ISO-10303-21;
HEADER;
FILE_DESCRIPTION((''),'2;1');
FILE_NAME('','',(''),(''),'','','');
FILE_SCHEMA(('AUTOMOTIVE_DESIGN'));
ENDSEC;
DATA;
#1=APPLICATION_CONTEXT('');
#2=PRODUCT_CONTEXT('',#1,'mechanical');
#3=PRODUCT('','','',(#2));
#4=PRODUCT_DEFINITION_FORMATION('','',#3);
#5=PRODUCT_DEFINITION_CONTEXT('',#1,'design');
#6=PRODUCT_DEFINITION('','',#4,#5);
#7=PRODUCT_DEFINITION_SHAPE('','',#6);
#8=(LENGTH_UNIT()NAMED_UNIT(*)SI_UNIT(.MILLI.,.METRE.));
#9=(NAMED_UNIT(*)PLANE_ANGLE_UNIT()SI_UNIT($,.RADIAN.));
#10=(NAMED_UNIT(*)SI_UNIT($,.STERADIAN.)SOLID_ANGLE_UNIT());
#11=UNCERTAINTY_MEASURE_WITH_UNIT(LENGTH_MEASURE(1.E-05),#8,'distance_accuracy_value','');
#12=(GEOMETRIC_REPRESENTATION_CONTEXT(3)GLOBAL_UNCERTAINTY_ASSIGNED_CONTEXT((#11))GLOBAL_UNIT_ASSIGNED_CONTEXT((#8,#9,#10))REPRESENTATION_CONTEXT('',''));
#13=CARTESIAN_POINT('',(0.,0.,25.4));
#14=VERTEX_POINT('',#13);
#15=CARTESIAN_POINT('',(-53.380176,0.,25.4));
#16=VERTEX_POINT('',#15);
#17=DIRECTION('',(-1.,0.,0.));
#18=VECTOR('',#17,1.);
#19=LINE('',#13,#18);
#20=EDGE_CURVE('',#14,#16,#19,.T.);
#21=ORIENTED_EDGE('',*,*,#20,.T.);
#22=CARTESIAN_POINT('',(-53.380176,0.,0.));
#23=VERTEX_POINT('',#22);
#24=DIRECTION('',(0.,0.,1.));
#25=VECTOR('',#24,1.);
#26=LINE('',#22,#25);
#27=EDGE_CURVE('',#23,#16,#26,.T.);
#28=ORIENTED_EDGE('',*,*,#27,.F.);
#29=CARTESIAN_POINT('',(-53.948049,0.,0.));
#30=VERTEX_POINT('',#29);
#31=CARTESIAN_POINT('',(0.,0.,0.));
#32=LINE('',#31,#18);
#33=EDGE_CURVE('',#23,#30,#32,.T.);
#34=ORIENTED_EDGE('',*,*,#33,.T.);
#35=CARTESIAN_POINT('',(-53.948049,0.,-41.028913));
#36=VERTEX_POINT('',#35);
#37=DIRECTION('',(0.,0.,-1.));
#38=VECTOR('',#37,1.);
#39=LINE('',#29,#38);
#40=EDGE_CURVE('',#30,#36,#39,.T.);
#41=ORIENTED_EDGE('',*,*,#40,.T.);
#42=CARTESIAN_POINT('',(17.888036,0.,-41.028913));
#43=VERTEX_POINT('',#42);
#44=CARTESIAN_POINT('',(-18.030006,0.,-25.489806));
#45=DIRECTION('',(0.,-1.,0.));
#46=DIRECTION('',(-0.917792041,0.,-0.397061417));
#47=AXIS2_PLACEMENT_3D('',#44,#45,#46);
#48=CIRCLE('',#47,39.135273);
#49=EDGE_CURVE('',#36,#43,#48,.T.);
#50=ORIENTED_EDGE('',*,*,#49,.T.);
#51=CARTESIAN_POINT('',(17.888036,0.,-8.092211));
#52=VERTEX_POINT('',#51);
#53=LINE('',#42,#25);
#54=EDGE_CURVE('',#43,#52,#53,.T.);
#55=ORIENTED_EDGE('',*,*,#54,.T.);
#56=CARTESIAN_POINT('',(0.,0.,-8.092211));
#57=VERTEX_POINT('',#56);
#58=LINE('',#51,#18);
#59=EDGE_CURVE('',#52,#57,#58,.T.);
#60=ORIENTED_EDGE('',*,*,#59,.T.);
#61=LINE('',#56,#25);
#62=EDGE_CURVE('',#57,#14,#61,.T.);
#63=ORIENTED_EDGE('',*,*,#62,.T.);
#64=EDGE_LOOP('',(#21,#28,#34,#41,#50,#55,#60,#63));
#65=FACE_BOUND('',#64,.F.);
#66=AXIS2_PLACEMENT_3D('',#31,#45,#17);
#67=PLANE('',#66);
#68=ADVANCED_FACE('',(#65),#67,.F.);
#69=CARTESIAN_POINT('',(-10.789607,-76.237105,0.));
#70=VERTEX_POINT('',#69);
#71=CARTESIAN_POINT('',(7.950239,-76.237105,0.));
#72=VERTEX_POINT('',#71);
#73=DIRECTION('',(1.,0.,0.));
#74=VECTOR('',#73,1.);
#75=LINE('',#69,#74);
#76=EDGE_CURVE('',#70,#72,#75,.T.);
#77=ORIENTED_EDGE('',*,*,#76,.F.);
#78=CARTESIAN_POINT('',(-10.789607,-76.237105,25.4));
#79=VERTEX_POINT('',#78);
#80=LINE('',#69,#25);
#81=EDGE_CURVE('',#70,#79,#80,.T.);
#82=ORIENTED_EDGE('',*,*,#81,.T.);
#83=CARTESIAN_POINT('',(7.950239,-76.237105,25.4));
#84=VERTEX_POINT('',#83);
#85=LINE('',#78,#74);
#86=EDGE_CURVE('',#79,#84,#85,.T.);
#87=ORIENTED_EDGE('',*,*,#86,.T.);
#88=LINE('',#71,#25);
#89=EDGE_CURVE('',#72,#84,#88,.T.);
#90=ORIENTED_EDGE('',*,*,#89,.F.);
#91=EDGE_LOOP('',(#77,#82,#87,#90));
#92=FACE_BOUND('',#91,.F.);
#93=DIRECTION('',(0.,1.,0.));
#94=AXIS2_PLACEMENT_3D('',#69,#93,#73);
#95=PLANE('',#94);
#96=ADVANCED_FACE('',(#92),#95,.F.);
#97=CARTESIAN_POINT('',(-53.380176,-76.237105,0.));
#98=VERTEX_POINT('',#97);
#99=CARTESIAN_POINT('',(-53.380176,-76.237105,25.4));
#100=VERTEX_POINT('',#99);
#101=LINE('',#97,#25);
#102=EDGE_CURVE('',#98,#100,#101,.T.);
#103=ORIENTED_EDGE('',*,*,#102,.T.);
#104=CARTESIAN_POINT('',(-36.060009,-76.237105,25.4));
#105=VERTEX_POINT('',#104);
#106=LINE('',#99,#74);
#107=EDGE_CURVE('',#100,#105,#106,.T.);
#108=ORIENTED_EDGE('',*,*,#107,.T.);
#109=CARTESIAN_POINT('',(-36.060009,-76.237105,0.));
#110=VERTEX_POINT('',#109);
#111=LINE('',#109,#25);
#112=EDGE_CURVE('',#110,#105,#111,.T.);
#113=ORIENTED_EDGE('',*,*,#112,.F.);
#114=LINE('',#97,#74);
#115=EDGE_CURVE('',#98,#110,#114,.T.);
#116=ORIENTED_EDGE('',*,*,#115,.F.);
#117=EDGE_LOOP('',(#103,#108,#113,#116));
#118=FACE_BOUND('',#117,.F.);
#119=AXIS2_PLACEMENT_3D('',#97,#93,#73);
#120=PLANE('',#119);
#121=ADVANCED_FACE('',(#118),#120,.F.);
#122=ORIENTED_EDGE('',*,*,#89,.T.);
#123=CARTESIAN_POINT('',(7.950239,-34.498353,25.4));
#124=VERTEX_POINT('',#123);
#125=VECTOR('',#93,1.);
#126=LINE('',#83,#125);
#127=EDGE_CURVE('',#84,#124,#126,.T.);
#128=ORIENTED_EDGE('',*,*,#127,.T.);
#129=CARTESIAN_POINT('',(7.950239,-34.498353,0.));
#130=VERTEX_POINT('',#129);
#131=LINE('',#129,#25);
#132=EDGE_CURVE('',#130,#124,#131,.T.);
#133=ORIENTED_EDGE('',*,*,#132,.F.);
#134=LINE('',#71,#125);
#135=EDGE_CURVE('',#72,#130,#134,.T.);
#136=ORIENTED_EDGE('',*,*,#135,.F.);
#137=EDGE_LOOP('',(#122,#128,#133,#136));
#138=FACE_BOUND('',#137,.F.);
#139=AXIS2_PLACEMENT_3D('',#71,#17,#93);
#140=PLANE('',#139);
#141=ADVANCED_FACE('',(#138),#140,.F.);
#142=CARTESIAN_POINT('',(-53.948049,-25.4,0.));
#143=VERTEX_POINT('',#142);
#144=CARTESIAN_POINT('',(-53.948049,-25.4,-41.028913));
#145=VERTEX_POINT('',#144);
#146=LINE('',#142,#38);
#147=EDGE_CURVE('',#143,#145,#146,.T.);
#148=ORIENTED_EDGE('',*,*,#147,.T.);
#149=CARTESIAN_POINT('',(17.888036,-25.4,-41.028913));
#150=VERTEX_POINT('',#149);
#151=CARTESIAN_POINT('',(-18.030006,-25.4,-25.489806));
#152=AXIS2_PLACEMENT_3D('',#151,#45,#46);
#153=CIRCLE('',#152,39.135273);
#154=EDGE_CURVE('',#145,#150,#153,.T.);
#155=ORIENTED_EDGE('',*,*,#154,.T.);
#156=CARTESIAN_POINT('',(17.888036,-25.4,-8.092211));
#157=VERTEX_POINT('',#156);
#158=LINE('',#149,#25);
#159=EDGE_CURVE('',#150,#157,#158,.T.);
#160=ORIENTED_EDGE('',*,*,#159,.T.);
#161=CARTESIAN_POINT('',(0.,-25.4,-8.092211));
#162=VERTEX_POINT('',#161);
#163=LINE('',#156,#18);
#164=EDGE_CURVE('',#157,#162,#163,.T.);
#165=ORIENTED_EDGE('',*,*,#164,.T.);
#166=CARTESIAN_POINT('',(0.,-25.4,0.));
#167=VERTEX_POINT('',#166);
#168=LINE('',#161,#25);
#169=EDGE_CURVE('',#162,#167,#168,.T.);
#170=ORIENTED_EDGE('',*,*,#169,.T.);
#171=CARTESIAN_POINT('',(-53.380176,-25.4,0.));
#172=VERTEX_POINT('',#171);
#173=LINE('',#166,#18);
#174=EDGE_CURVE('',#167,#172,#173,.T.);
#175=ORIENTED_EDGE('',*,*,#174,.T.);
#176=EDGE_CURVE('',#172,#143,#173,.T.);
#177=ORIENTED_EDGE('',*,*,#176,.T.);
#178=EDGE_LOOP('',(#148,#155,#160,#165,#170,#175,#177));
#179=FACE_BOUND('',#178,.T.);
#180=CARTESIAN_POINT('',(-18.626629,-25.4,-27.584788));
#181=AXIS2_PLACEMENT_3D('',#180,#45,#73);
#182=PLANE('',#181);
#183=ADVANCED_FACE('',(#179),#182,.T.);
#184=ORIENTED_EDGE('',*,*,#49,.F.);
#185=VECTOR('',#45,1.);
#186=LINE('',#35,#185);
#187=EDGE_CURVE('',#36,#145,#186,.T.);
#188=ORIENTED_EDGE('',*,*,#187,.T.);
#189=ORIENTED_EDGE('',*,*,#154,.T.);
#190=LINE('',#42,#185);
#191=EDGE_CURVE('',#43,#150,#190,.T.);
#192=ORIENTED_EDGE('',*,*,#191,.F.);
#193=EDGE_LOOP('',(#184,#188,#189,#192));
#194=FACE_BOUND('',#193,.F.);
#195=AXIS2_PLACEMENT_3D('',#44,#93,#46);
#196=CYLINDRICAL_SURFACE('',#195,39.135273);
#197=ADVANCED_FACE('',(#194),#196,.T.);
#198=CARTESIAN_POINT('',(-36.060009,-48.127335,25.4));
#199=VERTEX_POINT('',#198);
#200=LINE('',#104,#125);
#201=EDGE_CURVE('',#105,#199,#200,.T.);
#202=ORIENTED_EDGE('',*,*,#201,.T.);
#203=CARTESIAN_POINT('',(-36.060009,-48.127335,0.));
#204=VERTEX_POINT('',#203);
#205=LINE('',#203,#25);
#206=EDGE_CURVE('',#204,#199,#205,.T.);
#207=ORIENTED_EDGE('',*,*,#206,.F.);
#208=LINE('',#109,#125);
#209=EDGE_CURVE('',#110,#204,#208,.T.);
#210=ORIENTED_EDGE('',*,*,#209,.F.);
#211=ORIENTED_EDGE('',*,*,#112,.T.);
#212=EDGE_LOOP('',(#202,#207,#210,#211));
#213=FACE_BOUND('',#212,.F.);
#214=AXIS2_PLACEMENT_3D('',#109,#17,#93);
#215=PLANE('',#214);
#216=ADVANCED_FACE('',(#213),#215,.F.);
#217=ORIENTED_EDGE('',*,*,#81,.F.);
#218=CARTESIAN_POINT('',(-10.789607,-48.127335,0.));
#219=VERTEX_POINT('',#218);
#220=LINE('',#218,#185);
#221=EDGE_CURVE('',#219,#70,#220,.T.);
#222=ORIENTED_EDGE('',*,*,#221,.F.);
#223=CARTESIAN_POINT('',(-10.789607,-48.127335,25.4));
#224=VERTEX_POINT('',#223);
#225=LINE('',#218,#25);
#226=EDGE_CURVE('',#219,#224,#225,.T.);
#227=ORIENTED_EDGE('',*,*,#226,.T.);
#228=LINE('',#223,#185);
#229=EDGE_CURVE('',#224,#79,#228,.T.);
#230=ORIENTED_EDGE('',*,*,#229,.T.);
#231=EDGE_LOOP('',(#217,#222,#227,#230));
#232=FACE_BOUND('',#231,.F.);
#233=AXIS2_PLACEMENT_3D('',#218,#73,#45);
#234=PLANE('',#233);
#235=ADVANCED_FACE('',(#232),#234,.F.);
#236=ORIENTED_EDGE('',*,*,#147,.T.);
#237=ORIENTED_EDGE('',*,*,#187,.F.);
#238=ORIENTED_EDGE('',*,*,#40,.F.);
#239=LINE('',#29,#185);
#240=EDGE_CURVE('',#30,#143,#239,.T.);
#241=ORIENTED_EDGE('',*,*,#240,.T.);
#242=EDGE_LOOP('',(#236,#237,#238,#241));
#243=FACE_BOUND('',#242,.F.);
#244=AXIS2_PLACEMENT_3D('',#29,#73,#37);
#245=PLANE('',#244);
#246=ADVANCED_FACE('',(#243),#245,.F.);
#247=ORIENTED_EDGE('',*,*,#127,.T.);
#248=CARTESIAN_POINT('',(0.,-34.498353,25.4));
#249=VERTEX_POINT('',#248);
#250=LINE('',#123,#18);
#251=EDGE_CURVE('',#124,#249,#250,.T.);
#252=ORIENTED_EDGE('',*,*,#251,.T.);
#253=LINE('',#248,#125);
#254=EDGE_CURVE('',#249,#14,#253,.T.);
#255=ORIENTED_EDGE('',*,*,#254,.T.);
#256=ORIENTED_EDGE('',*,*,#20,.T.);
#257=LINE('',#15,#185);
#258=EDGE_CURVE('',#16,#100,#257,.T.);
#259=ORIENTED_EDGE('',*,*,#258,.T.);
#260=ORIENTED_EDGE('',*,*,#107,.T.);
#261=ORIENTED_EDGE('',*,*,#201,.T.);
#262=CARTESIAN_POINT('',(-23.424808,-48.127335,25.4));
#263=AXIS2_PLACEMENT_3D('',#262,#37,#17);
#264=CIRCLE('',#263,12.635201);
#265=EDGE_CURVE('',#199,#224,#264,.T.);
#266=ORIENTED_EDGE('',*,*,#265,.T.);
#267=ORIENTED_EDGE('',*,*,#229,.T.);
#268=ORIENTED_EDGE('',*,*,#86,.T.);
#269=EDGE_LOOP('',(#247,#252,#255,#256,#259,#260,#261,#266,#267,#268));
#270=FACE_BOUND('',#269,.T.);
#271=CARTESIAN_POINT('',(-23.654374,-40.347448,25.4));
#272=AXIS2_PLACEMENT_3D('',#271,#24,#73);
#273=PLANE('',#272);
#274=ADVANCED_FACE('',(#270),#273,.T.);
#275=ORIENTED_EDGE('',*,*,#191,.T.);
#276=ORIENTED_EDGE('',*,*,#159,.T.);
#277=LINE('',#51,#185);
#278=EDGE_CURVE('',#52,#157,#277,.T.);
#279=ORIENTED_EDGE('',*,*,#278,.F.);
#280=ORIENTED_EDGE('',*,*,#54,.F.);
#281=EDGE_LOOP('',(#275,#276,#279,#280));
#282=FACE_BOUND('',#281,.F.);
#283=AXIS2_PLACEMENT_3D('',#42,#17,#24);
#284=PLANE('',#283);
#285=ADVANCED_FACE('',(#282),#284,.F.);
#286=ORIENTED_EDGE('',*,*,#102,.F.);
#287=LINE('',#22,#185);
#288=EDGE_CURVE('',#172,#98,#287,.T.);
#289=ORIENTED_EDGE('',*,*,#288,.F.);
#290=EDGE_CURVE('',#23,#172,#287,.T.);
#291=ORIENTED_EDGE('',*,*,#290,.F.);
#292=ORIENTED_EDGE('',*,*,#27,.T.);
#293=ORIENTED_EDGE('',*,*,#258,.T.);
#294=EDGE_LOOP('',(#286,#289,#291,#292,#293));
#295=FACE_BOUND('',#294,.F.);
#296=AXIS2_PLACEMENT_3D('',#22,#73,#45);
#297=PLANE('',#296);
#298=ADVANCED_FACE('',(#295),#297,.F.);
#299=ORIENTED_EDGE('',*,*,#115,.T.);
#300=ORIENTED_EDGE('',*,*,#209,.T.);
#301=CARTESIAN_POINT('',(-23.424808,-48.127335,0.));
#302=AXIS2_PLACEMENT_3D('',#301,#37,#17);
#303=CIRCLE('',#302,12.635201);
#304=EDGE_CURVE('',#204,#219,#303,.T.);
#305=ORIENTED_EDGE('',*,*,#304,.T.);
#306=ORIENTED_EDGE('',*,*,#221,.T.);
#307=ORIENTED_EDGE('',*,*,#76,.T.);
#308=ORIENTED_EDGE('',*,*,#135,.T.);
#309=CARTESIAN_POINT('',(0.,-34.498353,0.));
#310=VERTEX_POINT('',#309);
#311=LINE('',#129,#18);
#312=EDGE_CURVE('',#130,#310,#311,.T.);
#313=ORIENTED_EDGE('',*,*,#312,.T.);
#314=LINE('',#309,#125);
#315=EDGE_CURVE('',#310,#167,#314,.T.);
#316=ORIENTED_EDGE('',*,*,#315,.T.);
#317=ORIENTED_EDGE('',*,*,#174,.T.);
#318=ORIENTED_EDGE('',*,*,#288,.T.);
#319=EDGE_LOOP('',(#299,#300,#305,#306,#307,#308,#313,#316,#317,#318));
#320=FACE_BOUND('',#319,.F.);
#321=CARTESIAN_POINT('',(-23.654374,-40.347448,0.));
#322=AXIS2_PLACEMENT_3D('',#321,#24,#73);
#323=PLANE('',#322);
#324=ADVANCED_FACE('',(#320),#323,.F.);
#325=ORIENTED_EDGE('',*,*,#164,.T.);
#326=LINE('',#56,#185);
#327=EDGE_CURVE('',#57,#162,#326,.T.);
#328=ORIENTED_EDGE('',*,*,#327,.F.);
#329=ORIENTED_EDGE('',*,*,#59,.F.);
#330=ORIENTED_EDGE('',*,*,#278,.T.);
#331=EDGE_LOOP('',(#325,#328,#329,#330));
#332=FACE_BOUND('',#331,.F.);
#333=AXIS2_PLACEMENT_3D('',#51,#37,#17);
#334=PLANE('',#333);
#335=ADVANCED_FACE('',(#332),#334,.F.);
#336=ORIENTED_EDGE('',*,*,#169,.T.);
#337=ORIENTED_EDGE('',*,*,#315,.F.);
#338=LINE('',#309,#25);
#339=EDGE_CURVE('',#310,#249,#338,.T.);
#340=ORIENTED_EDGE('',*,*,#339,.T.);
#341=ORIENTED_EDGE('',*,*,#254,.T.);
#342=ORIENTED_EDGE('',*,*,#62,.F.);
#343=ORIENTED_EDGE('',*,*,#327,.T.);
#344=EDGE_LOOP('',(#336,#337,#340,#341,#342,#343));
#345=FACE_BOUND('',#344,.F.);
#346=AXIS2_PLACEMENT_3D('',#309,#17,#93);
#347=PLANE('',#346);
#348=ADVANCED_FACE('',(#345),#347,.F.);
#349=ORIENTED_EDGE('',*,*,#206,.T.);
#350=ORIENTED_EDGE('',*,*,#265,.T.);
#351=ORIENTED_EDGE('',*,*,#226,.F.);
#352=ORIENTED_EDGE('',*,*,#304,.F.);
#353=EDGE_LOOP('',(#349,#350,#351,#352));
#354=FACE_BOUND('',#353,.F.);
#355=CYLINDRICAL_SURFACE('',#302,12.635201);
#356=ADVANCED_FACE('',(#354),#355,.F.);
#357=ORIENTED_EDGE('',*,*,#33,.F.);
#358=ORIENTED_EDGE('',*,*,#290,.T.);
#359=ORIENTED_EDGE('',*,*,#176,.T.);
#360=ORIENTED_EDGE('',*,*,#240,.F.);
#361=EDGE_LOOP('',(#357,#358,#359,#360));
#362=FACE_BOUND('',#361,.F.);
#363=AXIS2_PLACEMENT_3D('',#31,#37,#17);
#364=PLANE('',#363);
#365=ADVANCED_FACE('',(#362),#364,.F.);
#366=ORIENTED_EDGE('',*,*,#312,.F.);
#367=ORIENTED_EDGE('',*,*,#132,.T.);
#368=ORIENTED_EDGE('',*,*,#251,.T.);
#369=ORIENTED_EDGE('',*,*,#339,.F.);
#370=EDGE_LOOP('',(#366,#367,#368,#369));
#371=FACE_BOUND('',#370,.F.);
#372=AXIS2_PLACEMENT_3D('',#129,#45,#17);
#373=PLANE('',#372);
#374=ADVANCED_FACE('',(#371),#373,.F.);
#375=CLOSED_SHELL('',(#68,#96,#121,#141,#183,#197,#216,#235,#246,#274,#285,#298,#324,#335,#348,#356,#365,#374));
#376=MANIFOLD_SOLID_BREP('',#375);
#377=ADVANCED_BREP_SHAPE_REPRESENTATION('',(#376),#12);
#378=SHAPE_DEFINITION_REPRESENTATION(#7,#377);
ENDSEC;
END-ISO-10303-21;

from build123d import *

# Parameters (mm, degrees)
F1_DEPTH = 25.4
F3_DEPTH = 25.4


# Not quite as in the source:
# - ends of sketch curves that miss each other by under 0.0002 mm in the source are joined


with BuildPart() as f1:
    # F0 (on Front) → F1 (new body)
    with BuildSketch(Plane.XZ):
        with BuildLine():
            Line((0, 0), (-53.9480485022, 0))
            Line((-53.9480485022, 0), (-53.9480485022, -41.0289131105))
            ThreePointArc((-53.9480485022, -41.0289131105), (-18.0300064385, -64.6250791293), (17.8880356252, -41.0289131105))
            Line((17.8880356252, -41.0289131105), (17.8880356252, -8.0922106281))
            Line((17.8880356252, -8.0922106281), (0, -8.0922106281))
            Line((0, -8.0922106281), (0, 0))
        make_face()
    extrude(amount=F1_DEPTH)

    # F2 (on Top) → F3 (join)
    with BuildSketch(Plane.XY):
        with BuildLine():
            Line((0, -34.4983525574), (0, -25.6963036954))
            Line((0, -25.6963036954), (0, 0))
            Line((0, 0), (-53.380176425, 0))
            Line((-53.380176425, 0), (-53.380176425, -25.9802397341))
            Line((-53.380176425, -25.9802397341), (-53.380176425, -76.2371048331))
            Line((-53.380176425, -76.2371048331), (-36.0600091517, -76.2371048331))
            Line((-36.0600091517, -76.2371048331), (-36.0600091517, -48.1273345649))
            ThreePointArc((-36.0600091517, -48.1273345649), (-23.424807936, -35.4921333492), (-10.7896067202, -48.1273345649))
            Line((-10.7896067202, -48.1273345649), (-10.7896067202, -76.2371048331))
            Line((-10.7896067202, -76.2371048331), (7.9502388835, -76.2371048331))
            Line((7.9502388835, -76.2371048331), (7.9502388835, -34.4983525574))
            Line((7.9502388835, -34.4983525574), (0, -34.4983525574))
        make_face()
    extrude(amount=F3_DEPTH)


solid = f1.part
